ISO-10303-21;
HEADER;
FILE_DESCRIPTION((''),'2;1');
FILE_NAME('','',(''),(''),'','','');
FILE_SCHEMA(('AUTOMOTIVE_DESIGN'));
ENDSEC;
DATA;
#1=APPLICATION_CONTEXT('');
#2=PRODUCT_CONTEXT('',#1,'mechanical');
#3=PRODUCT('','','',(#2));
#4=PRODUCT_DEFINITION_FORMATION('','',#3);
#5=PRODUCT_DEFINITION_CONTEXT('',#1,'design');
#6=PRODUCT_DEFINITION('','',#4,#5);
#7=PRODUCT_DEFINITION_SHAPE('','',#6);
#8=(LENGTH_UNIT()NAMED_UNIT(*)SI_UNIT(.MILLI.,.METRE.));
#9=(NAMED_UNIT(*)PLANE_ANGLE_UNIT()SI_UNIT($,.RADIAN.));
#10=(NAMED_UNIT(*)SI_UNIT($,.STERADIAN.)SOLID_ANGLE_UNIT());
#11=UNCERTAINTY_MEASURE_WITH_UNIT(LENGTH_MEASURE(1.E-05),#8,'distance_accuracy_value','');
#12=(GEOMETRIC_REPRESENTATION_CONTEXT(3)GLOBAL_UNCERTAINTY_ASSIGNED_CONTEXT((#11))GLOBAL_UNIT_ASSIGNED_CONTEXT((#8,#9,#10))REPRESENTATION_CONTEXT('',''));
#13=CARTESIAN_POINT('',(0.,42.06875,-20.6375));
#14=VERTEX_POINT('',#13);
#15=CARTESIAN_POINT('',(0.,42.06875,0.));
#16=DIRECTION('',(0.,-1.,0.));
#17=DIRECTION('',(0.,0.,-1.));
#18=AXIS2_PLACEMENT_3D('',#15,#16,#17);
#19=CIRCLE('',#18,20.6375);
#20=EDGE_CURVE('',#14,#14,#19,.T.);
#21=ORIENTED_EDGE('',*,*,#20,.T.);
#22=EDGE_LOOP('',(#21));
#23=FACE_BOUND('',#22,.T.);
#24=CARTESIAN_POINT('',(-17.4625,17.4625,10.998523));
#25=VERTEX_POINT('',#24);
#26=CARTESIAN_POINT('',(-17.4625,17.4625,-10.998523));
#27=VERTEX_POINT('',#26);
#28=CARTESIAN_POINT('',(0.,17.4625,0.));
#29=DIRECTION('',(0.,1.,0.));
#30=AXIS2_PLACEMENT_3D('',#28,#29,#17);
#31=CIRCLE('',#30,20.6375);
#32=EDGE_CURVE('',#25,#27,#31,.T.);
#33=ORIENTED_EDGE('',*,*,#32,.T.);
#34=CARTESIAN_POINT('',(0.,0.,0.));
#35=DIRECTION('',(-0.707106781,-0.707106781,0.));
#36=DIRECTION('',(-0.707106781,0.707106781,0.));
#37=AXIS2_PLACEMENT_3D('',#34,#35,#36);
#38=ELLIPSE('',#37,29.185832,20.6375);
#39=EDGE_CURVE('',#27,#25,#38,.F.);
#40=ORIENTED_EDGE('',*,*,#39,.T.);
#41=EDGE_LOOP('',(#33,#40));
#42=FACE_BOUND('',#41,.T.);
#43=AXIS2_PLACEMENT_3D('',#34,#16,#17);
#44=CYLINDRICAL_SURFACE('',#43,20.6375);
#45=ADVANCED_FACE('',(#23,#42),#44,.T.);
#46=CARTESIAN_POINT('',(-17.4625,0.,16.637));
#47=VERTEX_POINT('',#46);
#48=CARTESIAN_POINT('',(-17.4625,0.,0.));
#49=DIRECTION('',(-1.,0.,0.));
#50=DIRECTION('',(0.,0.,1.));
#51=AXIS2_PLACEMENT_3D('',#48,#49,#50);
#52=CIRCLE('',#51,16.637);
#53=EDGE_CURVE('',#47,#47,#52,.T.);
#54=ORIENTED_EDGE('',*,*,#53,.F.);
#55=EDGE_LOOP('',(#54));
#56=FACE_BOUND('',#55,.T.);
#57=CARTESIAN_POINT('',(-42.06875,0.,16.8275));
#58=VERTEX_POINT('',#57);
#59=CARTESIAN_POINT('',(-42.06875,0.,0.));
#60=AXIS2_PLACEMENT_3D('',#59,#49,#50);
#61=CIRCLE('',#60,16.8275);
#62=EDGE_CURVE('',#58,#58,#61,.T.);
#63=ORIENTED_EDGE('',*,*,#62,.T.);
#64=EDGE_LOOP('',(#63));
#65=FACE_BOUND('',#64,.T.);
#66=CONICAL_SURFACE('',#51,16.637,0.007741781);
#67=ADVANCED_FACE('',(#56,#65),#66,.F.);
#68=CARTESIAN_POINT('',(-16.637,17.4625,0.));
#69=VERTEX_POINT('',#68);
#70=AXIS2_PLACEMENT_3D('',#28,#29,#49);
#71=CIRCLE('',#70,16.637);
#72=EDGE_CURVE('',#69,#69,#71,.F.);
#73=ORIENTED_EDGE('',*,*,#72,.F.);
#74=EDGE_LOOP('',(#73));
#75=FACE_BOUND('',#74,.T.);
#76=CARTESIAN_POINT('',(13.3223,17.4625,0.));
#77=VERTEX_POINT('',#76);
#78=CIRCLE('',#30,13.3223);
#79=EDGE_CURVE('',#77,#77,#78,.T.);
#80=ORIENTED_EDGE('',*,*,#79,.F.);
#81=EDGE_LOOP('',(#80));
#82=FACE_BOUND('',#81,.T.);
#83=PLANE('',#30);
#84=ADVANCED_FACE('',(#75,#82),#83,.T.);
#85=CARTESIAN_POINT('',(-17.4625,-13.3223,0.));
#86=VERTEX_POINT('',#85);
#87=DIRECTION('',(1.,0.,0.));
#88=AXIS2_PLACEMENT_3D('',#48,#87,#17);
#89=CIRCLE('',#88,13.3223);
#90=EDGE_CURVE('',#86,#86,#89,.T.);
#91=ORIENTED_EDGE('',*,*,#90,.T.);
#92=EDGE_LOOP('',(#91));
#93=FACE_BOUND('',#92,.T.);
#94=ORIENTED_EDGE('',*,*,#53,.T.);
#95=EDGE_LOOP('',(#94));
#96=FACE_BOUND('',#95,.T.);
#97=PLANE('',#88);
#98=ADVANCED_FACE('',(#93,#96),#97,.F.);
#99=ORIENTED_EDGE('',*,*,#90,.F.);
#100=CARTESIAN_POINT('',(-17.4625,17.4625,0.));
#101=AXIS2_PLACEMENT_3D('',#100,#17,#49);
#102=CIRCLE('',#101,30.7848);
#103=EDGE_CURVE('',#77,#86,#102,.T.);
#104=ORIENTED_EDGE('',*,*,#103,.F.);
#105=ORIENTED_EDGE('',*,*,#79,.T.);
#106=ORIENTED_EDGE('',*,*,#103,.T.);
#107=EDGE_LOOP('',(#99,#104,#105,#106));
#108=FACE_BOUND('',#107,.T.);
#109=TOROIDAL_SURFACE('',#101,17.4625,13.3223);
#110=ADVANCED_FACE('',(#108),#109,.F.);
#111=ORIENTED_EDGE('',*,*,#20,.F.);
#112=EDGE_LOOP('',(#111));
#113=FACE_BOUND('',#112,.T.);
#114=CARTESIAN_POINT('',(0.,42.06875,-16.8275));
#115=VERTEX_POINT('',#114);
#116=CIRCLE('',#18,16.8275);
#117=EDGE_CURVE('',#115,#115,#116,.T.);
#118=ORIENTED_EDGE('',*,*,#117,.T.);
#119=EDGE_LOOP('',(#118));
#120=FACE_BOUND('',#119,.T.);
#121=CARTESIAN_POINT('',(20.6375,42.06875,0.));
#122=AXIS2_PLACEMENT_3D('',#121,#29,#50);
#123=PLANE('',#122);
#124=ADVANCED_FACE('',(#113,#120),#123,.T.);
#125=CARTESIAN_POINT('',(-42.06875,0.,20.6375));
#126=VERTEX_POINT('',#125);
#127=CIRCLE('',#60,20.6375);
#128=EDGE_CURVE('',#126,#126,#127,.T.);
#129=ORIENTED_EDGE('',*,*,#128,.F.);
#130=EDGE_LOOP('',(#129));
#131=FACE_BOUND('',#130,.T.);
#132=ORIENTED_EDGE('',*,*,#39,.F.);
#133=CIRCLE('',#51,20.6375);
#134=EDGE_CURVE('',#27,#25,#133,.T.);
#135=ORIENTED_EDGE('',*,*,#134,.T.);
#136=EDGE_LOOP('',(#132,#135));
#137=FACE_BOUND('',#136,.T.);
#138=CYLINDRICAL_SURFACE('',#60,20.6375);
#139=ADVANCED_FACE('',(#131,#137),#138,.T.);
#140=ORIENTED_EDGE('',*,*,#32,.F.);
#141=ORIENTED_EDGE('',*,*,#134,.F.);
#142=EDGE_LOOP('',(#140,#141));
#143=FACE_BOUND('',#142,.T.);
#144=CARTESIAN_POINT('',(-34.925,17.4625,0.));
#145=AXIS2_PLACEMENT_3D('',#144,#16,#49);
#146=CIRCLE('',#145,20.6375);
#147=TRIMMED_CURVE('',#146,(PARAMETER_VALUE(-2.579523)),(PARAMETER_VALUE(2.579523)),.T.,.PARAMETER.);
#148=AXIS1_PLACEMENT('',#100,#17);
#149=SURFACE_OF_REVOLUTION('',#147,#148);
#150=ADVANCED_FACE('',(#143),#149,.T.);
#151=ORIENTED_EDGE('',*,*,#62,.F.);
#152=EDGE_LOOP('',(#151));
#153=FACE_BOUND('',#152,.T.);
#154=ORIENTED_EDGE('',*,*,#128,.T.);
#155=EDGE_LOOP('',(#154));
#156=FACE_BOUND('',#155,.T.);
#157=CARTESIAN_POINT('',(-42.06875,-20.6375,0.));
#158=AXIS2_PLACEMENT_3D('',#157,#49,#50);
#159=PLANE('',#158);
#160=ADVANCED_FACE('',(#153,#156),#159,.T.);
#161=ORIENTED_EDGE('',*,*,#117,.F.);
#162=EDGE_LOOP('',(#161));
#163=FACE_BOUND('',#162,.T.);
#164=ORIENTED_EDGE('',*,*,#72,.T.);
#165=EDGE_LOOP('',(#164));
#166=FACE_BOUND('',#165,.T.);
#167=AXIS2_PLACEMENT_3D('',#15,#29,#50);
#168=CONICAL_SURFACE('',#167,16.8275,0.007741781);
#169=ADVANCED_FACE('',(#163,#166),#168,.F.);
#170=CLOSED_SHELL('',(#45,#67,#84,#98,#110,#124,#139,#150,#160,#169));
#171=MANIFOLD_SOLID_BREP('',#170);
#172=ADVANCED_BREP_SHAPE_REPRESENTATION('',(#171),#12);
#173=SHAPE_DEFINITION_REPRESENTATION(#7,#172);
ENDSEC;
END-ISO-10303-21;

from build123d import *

# Parameters (mm, degrees)
SKETCH3_R   = 20.6375
SKETCH3_R_2 = 13.3223


with BuildPart() as part:
    # Sketch1 → Revolve1 (revolve)
    with BuildSketch(Plane.XY):
        Polygon((-42.06875, -20.6375), (-17.4625, -20.6375), (-17.4625, -16.637), (-42.06875, -16.8275), align=None)
    revolve(axis=Axis((-42.06875, 0, 0), (1, 0, 0)))


with BuildPart() as body_2:
    # Sketch2 → Revolve2 (revolve)
    with BuildSketch(Plane.XY):
        Polygon((16.8275, 42.06875), (16.637, 17.4625), (20.6375, 17.4625), (20.6375, 42.06875), align=None)
    revolve(axis=Axis((0, 0, 0), (0, 1, 0)))


with BuildPart() as sweep1_tool:
    # Sweep1: sweep along a path in Sketch4
    with BuildLine(Plane.XY) as sweep1_path:
        ThreePointArc((-17.4625, 0), (-5.114648, 5.114648), (0, 17.4625))
    # Sketch3 → Sweep1 (sweep)
    with BuildSketch(Plane(origin=(-17.4625, 0, 0), x_dir=(0, 0, -1), z_dir=(1, 0, 0))):
        Circle(SKETCH3_R)
        Circle(SKETCH3_R_2, mode=Mode.SUBTRACT)
    sweep(path=sweep1_path.line)


with BuildPart() as part_1:
    add(part.part)


with BuildPart() as part_2:
    # Sweep1: joined with sweep1_tool
    add(part_1.part.fuse(sweep1_tool.part, body_2.part, tol=0.00001))


solid = part_2.part
